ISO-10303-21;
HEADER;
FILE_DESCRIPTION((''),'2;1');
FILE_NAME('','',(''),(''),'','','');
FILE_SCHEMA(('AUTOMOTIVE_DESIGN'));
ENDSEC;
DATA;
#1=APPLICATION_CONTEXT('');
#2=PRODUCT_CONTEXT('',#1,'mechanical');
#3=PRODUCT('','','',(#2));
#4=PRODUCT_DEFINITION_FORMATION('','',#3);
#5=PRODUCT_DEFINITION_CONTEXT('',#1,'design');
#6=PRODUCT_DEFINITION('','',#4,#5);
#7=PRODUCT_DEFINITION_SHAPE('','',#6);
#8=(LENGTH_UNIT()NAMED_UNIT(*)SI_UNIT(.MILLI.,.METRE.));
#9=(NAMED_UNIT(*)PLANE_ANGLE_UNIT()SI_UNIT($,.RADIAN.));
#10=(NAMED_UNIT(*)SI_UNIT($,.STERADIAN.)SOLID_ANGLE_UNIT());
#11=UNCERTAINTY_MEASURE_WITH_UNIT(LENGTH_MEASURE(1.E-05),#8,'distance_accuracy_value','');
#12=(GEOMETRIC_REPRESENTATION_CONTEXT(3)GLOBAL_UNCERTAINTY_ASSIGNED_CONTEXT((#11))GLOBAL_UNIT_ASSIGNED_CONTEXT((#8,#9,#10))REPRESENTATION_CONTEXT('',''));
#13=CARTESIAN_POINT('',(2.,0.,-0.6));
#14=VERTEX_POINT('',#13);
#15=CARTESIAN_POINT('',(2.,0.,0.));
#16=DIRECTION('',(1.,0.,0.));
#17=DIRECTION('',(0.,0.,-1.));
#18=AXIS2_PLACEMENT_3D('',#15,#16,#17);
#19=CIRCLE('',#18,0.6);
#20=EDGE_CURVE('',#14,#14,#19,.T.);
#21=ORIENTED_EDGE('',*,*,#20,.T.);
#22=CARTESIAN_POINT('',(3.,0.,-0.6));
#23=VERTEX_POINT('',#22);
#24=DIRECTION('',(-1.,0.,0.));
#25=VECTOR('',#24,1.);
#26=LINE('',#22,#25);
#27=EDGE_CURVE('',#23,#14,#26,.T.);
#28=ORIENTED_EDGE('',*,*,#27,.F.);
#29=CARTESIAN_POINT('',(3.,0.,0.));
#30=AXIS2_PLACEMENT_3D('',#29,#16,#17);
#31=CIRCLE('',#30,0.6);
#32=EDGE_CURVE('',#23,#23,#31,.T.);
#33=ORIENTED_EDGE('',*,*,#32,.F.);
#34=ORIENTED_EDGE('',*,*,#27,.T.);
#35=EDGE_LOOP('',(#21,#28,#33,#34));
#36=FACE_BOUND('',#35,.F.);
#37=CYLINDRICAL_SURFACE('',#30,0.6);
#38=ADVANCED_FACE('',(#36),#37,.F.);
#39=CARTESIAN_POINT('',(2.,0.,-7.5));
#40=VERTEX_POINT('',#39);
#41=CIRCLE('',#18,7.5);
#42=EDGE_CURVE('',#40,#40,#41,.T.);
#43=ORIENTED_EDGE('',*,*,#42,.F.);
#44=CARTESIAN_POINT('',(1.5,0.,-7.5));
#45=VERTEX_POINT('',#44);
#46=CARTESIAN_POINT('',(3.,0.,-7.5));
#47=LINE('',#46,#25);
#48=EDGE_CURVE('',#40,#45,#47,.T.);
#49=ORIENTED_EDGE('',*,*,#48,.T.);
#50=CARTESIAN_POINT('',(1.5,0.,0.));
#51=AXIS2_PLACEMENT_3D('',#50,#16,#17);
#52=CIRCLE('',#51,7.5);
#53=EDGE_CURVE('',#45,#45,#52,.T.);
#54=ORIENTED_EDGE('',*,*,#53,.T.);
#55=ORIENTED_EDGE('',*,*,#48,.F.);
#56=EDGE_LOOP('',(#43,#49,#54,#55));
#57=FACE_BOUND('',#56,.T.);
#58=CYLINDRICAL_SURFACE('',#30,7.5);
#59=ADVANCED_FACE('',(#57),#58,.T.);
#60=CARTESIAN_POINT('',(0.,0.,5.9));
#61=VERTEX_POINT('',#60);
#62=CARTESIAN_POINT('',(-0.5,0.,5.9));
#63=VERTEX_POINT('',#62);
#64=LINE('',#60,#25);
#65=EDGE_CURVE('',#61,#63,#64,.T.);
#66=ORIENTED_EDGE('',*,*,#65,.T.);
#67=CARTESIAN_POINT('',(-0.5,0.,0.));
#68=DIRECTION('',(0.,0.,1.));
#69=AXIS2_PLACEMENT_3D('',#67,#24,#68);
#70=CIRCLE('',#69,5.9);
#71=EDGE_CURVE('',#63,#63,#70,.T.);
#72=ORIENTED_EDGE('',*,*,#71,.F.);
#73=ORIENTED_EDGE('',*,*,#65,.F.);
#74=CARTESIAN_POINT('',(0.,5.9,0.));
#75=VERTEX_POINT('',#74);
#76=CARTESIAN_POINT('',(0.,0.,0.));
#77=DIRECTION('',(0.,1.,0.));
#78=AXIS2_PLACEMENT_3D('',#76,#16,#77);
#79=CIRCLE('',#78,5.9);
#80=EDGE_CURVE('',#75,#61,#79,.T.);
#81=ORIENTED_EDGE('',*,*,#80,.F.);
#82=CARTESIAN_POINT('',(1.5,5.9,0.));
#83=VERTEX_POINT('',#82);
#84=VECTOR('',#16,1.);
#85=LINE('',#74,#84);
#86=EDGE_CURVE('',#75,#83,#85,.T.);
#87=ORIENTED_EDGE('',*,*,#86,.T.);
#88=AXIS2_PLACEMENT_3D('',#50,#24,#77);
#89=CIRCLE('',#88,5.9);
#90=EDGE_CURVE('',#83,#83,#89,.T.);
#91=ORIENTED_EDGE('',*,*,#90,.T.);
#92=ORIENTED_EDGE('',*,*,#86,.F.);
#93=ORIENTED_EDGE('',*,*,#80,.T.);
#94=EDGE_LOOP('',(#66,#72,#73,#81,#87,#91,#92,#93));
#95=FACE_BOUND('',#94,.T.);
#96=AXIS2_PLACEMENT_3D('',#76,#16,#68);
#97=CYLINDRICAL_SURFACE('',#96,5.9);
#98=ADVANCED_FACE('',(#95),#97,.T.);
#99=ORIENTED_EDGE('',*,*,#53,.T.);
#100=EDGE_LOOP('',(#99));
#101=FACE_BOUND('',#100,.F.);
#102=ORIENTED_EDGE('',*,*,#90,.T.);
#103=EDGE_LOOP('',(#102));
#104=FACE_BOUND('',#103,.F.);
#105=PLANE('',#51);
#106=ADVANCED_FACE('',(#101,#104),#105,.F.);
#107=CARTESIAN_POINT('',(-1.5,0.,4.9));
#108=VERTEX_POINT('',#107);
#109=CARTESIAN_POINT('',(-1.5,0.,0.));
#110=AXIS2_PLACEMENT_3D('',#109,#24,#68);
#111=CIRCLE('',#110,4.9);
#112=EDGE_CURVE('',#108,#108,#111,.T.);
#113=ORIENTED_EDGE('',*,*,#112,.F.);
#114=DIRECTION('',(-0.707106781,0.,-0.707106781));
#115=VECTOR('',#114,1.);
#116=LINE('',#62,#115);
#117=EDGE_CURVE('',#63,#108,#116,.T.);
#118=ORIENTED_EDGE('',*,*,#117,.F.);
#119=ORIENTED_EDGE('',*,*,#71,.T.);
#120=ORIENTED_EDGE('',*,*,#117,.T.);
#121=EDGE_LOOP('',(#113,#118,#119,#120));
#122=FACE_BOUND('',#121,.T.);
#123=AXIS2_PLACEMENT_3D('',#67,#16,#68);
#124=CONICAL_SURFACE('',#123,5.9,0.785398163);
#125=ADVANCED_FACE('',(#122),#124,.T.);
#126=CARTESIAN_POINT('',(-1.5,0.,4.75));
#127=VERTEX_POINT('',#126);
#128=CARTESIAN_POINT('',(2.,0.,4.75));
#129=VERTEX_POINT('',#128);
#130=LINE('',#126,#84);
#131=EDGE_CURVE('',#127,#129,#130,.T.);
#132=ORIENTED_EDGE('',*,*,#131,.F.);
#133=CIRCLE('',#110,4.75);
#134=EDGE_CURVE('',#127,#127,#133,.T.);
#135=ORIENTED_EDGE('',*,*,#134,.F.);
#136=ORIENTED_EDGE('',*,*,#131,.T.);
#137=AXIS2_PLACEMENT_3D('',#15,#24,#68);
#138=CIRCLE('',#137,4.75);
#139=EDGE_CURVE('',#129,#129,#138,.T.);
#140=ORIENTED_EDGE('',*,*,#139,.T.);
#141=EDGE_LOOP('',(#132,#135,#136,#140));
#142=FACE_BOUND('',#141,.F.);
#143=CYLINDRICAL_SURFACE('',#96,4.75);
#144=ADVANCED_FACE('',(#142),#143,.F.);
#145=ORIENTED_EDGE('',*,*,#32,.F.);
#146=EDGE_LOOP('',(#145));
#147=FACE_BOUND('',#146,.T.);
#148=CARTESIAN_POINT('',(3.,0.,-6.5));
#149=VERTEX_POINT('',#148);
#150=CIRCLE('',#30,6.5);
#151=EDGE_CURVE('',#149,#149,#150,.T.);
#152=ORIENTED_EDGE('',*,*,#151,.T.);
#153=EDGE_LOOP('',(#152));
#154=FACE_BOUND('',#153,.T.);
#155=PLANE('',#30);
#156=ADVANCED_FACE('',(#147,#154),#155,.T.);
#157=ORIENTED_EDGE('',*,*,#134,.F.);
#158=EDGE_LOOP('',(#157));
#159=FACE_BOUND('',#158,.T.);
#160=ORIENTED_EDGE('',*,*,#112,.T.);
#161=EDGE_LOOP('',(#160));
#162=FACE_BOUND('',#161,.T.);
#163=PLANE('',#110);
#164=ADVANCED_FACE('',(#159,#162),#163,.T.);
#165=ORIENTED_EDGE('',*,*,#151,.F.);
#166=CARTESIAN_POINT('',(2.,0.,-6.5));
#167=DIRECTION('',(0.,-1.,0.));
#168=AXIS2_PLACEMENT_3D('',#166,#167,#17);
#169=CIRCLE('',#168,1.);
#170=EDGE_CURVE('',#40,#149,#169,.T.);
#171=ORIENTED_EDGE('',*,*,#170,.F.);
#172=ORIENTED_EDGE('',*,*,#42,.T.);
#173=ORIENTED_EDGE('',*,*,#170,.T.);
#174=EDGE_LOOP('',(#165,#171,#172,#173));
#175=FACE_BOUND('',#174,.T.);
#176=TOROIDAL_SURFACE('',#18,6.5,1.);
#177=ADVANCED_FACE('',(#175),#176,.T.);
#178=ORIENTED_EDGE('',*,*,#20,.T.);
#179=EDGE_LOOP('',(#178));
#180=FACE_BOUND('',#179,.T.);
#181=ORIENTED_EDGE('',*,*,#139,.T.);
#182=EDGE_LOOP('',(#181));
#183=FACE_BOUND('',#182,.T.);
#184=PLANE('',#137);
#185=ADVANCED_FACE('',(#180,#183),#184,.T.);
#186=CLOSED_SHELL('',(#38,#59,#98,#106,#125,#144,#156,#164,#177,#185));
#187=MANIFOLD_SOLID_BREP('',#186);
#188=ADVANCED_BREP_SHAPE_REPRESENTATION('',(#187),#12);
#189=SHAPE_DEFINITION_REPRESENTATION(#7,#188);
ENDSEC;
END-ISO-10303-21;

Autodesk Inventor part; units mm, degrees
ref_plane "YZ Plane" through (0, 0, 0) normal (1, 0, 0) x (0, 1, 0)
ref_plane "XZ Plane" through (0, 0, 0) normal (0, 1, 0) x (-1, 0, 0)
ref_plane "XY Plane" through (0, 0, 0) normal (0, 0, 1) x (1, 0, 0)
sketch "Boceto1" plane through (0, 0, 0) normal (1, 0, 0) x (0, 1, 0)
  circle A0 centre (0, 0) radius 5.9
  dimension "d0" = 11.8
extrude "Extrusión1" add sketch "Boceto1" along normal blind 3
sketch "Boceto2" plane through (3, 0, 0) normal (1, 0, 0) x (0, 0, -1)
  circle A0 centre (0, 0) radius 7.5
  dimension "d3" = 15
extrude "Extrusión2" add sketch "Boceto2" against normal blind 1.5
sketch "Boceto3" plane through (0, 0, 0) normal (-1, 0, 0) x (0, 0, 1)
  circle A0 centre (0, 0) radius 4.75
  dimension "d6" = 9.5
extrude "Extrusión3" cut sketch "Boceto3" against normal blind 2
fillet "Empalme1" radius 1 1 edges at (3, 0, 7.5)
sketch "Boceto4" plane through (3, 0, 0) normal (1, 0, 0) x (0, 0, -1)
  circle A0 centre (0, 0) radius 0.6
  dimension "d13" = 1.2
extrude "Extrusión4" cut sketch "Boceto4" against normal blind 10
sketch "Boceto5" plane through (0, 0, 0) normal (-1, 0, 0) x (0, 0, 1)
  circle A0 centre (0, 0) radius 5.9
  circle A1 centre (0, 0) radius 5.9 projected
  circle A2 centre (0, 0) radius 4.75
extrude "Extrusión5" add sketch "Boceto5" along normal blind 1.5
chamfer "Chaflán2" distance 1 angle 45 1 edges at (-1.5, 0, -5.9)
properties part number "tapa carcasa camara"
